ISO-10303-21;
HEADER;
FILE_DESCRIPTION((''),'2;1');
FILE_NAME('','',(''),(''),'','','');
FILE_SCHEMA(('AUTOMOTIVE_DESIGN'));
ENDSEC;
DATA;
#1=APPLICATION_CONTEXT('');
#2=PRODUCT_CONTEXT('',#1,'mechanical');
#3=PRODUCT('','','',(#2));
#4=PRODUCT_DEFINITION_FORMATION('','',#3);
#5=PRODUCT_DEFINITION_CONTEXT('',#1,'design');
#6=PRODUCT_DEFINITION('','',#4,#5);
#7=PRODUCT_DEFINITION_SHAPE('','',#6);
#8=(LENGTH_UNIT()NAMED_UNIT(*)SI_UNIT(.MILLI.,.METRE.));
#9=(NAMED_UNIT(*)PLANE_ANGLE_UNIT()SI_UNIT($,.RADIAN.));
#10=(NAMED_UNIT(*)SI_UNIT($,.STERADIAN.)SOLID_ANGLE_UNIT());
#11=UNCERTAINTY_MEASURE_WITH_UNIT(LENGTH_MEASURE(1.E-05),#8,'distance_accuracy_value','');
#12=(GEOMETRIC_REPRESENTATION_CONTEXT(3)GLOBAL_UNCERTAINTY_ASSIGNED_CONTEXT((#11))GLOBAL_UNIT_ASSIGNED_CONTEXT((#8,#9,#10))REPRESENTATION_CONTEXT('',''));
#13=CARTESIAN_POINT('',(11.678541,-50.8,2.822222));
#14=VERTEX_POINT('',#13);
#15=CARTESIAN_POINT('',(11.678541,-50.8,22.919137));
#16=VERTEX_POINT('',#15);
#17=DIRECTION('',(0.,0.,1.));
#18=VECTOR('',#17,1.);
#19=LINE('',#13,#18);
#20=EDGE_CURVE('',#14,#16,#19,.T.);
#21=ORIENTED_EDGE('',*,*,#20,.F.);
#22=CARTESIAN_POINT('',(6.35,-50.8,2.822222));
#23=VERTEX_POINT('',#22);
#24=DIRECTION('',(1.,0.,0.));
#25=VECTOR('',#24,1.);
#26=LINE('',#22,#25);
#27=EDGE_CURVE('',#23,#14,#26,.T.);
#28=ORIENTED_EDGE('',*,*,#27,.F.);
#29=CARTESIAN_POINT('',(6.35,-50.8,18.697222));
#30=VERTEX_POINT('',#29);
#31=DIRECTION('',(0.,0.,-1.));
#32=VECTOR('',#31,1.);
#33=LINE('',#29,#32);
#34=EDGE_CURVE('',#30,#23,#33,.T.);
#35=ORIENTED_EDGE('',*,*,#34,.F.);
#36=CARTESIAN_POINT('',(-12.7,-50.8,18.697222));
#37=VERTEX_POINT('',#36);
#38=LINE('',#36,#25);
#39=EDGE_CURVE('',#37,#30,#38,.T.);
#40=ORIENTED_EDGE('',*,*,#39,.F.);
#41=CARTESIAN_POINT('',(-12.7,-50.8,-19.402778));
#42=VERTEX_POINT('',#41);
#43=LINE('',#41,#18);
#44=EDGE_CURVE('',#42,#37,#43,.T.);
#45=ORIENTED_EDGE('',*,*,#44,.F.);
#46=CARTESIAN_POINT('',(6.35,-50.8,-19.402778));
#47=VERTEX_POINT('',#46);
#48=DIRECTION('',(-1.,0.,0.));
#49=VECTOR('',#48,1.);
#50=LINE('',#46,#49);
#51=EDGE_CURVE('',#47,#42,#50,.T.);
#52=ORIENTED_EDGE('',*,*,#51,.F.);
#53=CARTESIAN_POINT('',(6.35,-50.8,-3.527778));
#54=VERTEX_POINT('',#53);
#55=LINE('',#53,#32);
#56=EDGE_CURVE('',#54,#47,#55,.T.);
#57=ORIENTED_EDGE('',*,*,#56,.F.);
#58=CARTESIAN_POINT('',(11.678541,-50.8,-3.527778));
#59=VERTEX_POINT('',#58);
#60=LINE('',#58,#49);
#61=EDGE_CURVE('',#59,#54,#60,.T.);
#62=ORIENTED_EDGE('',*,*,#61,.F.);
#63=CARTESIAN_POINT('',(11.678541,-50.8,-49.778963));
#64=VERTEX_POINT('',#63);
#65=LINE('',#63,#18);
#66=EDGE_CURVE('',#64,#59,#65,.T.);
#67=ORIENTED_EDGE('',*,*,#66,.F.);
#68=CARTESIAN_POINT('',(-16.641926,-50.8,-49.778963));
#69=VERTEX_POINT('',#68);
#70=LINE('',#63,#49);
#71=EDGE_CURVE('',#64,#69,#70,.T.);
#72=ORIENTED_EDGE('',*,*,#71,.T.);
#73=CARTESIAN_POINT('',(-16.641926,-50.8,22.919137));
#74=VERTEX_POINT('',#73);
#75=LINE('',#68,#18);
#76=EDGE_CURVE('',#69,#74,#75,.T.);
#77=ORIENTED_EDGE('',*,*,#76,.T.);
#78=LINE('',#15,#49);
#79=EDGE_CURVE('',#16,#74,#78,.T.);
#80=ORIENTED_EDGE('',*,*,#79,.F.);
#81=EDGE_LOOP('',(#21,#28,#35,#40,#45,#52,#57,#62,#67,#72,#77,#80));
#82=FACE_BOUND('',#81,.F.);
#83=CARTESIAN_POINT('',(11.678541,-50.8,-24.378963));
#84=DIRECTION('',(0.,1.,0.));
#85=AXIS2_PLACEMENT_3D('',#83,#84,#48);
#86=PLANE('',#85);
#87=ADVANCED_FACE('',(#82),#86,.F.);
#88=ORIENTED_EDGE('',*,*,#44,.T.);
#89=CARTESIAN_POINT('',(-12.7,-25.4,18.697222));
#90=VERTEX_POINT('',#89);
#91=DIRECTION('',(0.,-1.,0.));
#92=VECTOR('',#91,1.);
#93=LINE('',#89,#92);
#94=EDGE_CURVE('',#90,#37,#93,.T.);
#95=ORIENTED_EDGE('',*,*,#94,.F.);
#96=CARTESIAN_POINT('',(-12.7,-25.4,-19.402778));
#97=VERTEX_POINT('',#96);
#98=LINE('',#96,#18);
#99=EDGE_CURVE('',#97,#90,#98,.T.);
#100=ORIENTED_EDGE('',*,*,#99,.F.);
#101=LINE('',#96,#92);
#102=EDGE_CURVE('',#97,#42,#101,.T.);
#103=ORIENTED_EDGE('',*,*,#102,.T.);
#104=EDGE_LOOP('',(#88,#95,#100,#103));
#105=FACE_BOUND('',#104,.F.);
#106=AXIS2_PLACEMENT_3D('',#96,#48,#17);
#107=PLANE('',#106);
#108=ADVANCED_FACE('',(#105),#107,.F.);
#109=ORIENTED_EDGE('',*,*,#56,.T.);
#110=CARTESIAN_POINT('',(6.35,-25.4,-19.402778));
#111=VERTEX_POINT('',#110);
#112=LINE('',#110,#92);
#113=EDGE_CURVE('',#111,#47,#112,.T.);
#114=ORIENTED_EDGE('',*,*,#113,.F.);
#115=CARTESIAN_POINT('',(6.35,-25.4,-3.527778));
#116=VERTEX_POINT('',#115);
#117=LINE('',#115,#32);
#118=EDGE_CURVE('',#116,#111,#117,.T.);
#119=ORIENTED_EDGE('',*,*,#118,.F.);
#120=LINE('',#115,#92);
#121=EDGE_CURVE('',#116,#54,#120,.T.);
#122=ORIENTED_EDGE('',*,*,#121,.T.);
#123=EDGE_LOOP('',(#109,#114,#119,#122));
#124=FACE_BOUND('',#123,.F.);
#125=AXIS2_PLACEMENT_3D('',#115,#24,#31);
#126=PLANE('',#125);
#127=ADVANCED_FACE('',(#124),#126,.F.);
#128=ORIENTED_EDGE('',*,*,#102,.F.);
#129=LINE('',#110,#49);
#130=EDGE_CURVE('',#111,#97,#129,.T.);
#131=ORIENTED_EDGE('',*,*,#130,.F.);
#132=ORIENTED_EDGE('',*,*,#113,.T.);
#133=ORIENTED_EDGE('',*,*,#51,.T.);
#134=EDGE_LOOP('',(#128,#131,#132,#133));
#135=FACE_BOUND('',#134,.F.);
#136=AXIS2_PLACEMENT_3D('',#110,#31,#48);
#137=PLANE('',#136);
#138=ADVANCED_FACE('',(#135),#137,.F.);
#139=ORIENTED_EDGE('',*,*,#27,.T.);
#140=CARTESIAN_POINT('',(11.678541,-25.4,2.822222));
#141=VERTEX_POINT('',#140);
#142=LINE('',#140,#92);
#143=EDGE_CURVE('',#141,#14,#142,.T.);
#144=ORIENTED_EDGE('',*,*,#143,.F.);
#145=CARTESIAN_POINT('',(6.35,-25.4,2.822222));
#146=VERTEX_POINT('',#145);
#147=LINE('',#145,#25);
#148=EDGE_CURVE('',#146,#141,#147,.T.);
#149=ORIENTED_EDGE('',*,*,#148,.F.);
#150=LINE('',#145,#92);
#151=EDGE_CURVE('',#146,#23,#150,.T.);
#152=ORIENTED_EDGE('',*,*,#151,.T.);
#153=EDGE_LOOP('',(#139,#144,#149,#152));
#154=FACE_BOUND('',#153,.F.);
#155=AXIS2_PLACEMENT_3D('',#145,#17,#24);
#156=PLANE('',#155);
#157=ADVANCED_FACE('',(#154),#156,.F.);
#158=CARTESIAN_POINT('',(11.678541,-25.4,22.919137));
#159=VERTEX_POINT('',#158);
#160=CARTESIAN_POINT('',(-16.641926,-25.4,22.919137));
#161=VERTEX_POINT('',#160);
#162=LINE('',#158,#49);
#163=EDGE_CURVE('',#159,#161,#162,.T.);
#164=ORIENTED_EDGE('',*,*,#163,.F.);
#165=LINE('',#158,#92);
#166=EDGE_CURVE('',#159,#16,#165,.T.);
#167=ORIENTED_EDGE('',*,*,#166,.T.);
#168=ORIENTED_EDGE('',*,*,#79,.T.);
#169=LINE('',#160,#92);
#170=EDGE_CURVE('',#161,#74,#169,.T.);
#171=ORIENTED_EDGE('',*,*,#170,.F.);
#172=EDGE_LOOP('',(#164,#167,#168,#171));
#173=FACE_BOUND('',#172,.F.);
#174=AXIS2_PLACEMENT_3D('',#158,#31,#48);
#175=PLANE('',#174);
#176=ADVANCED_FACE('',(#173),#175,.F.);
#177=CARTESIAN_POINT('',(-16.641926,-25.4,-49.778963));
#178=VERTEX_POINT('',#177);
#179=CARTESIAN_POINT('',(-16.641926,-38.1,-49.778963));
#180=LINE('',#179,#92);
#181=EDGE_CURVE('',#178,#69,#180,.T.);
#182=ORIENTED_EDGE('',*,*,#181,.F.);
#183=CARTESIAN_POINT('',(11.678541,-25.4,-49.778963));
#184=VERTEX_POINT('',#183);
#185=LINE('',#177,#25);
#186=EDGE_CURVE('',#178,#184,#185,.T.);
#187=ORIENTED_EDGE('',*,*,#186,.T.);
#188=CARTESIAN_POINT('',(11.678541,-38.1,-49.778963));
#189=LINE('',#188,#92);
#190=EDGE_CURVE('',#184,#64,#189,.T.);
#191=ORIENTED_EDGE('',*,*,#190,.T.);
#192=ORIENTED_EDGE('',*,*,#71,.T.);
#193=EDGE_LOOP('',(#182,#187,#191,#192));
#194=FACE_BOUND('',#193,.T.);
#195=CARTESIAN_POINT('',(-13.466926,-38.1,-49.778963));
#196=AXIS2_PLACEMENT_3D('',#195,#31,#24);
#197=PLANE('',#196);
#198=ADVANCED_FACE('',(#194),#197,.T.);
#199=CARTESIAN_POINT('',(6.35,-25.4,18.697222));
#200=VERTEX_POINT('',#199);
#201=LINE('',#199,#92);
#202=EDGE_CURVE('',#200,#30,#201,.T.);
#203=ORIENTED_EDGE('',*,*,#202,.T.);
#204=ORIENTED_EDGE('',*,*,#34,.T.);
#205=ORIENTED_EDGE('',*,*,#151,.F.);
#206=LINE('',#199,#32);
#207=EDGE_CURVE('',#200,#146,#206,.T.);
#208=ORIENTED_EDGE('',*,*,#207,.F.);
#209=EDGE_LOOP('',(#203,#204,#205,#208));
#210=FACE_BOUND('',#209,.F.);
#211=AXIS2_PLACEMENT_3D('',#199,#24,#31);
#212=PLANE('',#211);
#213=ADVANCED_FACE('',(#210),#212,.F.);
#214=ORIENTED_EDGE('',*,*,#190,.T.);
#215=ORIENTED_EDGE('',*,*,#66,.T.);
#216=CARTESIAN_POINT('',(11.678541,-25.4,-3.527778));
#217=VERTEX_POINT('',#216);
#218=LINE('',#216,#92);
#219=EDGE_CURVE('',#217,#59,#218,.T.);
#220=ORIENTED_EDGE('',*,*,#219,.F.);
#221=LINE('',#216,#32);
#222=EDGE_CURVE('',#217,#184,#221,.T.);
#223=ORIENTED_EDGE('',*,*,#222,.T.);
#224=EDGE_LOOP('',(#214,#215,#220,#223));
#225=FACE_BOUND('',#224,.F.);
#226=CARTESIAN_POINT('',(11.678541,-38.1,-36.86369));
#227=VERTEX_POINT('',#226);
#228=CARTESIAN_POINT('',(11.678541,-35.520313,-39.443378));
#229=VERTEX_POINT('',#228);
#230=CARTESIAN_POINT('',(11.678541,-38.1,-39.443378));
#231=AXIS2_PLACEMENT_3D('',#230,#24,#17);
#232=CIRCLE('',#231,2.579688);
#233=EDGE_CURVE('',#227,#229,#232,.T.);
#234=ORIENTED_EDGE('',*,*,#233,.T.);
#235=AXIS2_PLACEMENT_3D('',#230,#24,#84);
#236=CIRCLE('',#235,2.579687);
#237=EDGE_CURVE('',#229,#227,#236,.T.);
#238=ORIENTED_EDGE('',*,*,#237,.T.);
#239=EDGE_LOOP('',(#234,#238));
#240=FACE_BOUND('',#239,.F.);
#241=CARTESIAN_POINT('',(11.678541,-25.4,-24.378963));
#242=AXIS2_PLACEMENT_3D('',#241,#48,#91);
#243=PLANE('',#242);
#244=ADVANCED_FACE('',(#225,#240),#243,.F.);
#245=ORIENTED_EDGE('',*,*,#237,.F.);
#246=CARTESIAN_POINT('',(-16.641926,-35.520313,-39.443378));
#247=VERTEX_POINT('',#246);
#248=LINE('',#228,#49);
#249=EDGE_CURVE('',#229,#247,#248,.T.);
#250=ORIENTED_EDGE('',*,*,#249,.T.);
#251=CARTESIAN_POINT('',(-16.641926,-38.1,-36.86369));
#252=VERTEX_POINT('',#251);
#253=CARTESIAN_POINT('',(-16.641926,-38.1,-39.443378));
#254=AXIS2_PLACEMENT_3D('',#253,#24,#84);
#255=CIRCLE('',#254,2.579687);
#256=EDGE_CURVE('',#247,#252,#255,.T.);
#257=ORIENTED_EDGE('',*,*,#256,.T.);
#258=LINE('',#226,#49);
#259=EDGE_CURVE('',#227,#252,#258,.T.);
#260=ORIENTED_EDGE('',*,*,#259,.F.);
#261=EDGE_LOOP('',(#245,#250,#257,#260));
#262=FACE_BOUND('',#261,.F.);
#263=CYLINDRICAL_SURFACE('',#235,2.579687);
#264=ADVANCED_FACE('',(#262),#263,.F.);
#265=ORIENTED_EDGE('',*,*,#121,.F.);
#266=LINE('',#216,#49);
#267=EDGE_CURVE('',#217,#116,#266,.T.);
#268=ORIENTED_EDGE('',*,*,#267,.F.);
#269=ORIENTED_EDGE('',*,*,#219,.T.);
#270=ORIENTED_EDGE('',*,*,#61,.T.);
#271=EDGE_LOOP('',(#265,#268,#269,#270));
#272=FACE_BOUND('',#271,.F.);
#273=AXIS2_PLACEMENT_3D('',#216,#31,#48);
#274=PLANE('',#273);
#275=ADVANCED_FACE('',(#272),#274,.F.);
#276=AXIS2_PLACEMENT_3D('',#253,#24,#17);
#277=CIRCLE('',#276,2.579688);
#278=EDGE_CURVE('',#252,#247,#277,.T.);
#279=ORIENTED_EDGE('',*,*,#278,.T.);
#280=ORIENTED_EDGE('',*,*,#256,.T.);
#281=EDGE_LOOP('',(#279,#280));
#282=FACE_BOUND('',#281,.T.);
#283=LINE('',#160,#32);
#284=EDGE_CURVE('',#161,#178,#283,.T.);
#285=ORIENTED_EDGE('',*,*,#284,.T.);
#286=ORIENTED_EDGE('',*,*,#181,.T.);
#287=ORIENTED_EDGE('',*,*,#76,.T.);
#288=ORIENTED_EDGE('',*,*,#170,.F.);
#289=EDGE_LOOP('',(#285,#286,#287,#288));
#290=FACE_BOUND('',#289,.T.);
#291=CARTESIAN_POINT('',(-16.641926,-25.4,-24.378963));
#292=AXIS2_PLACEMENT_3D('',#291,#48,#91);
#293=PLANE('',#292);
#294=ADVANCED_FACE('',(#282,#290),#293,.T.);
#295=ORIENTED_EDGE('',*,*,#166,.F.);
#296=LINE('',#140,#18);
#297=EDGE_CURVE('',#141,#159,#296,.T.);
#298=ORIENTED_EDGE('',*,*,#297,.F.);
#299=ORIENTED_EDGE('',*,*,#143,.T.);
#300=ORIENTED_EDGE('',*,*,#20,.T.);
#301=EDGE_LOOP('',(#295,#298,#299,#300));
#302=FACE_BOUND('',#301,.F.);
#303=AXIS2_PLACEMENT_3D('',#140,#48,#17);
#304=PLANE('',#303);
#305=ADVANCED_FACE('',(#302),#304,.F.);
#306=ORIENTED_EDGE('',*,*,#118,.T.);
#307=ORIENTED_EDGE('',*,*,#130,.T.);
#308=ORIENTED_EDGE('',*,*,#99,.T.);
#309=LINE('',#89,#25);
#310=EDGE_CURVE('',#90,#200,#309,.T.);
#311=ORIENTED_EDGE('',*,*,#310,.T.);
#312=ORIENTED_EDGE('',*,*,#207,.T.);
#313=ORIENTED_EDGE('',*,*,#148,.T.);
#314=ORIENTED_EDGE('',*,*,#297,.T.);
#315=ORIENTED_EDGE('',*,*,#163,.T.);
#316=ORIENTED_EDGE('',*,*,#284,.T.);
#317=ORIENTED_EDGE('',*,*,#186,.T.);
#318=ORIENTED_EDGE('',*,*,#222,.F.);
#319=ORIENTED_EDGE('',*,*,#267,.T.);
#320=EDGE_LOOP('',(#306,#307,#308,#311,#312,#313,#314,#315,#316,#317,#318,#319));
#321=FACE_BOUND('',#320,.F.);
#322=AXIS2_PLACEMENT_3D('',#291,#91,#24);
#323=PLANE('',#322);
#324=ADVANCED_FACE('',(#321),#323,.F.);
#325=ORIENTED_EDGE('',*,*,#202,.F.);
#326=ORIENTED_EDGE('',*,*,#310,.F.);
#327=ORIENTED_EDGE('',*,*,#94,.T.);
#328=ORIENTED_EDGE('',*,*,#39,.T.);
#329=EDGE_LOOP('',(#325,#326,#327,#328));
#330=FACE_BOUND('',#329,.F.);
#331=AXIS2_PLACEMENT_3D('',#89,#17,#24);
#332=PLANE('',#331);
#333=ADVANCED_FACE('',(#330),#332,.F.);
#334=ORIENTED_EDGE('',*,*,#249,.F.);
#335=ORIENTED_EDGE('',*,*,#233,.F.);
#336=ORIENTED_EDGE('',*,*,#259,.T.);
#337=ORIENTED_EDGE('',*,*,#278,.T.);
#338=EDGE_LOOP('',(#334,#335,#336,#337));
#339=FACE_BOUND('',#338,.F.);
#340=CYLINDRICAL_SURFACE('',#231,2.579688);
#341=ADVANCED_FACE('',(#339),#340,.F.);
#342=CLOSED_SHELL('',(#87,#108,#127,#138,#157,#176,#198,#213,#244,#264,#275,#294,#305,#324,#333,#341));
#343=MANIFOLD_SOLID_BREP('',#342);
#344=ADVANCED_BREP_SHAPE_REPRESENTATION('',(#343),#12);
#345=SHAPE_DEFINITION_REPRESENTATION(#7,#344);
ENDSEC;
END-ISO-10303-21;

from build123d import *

# Parameters (mm, degrees)
F2_DEPTH = 25.4
F3_W     = 6.35
F3_H     = 25.4
F3_W_2   = 15.6204670995
F4_DEPTH = 25.4
F6_DEPTH = 38.1


# Not quite as in the source:
# - a feature names something its author has since deleted; it is built from what else it names


with BuildPart() as f2:
    # F1 (on offset) → F2 (new body)
    with BuildSketch(Plane.XZ.offset(25.4)):
        Polygon((-12.7, -19.4027777778), (-12.7, 18.6972222222), (6.35, 18.6972222222), (6.35, 2.8222222222), (11.6785410792, 2.8222222222), (11.6785410792, 22.9191370308), (-16.6419260204, 22.9191370308), (-16.6419260204, -24.3789628148), (11.6785410792, -24.3789628148), (11.6785410792, -3.5277777778), (6.35, -3.5277777778), (6.35, -19.4027777778), align=None)
    extrude(amount=F2_DEPTH)

    # F3 (on face) → F4 (join)
    with BuildSketch(Plane(origin=(0, 0, -24.3789628148), x_dir=(1, 0, 0), z_dir=(0, 0, -1))):
        with Locations((-13.4669260204, 38.1)):
            Rectangle(F3_W, F3_H)
        with Locations((8.5035410792, 38.1)):
            Rectangle(F3_W, F3_H)
        with Locations((-2.4816924706, 38.1)):
            Rectangle(F3_W_2, F3_H)
    extrude(amount=F4_DEPTH)

    # F5 (on face) → F6 (cut)
    with BuildSketch(Plane.YZ.offset(11.6785410792)):
        with BuildLine():
            ThreePointArc((-35.5203125, -39.4433777778), (-36.2758854754, -37.6192632532), (-38.1, -36.8636902778))
            ThreePointArc((-38.1, -36.8636902778), (-39.9241145246, -41.2674923024), (-35.5203125, -39.4433777778))
        make_face()
    extrude(amount=-F6_DEPTH, mode=Mode.SUBTRACT)


solid = f2.part
